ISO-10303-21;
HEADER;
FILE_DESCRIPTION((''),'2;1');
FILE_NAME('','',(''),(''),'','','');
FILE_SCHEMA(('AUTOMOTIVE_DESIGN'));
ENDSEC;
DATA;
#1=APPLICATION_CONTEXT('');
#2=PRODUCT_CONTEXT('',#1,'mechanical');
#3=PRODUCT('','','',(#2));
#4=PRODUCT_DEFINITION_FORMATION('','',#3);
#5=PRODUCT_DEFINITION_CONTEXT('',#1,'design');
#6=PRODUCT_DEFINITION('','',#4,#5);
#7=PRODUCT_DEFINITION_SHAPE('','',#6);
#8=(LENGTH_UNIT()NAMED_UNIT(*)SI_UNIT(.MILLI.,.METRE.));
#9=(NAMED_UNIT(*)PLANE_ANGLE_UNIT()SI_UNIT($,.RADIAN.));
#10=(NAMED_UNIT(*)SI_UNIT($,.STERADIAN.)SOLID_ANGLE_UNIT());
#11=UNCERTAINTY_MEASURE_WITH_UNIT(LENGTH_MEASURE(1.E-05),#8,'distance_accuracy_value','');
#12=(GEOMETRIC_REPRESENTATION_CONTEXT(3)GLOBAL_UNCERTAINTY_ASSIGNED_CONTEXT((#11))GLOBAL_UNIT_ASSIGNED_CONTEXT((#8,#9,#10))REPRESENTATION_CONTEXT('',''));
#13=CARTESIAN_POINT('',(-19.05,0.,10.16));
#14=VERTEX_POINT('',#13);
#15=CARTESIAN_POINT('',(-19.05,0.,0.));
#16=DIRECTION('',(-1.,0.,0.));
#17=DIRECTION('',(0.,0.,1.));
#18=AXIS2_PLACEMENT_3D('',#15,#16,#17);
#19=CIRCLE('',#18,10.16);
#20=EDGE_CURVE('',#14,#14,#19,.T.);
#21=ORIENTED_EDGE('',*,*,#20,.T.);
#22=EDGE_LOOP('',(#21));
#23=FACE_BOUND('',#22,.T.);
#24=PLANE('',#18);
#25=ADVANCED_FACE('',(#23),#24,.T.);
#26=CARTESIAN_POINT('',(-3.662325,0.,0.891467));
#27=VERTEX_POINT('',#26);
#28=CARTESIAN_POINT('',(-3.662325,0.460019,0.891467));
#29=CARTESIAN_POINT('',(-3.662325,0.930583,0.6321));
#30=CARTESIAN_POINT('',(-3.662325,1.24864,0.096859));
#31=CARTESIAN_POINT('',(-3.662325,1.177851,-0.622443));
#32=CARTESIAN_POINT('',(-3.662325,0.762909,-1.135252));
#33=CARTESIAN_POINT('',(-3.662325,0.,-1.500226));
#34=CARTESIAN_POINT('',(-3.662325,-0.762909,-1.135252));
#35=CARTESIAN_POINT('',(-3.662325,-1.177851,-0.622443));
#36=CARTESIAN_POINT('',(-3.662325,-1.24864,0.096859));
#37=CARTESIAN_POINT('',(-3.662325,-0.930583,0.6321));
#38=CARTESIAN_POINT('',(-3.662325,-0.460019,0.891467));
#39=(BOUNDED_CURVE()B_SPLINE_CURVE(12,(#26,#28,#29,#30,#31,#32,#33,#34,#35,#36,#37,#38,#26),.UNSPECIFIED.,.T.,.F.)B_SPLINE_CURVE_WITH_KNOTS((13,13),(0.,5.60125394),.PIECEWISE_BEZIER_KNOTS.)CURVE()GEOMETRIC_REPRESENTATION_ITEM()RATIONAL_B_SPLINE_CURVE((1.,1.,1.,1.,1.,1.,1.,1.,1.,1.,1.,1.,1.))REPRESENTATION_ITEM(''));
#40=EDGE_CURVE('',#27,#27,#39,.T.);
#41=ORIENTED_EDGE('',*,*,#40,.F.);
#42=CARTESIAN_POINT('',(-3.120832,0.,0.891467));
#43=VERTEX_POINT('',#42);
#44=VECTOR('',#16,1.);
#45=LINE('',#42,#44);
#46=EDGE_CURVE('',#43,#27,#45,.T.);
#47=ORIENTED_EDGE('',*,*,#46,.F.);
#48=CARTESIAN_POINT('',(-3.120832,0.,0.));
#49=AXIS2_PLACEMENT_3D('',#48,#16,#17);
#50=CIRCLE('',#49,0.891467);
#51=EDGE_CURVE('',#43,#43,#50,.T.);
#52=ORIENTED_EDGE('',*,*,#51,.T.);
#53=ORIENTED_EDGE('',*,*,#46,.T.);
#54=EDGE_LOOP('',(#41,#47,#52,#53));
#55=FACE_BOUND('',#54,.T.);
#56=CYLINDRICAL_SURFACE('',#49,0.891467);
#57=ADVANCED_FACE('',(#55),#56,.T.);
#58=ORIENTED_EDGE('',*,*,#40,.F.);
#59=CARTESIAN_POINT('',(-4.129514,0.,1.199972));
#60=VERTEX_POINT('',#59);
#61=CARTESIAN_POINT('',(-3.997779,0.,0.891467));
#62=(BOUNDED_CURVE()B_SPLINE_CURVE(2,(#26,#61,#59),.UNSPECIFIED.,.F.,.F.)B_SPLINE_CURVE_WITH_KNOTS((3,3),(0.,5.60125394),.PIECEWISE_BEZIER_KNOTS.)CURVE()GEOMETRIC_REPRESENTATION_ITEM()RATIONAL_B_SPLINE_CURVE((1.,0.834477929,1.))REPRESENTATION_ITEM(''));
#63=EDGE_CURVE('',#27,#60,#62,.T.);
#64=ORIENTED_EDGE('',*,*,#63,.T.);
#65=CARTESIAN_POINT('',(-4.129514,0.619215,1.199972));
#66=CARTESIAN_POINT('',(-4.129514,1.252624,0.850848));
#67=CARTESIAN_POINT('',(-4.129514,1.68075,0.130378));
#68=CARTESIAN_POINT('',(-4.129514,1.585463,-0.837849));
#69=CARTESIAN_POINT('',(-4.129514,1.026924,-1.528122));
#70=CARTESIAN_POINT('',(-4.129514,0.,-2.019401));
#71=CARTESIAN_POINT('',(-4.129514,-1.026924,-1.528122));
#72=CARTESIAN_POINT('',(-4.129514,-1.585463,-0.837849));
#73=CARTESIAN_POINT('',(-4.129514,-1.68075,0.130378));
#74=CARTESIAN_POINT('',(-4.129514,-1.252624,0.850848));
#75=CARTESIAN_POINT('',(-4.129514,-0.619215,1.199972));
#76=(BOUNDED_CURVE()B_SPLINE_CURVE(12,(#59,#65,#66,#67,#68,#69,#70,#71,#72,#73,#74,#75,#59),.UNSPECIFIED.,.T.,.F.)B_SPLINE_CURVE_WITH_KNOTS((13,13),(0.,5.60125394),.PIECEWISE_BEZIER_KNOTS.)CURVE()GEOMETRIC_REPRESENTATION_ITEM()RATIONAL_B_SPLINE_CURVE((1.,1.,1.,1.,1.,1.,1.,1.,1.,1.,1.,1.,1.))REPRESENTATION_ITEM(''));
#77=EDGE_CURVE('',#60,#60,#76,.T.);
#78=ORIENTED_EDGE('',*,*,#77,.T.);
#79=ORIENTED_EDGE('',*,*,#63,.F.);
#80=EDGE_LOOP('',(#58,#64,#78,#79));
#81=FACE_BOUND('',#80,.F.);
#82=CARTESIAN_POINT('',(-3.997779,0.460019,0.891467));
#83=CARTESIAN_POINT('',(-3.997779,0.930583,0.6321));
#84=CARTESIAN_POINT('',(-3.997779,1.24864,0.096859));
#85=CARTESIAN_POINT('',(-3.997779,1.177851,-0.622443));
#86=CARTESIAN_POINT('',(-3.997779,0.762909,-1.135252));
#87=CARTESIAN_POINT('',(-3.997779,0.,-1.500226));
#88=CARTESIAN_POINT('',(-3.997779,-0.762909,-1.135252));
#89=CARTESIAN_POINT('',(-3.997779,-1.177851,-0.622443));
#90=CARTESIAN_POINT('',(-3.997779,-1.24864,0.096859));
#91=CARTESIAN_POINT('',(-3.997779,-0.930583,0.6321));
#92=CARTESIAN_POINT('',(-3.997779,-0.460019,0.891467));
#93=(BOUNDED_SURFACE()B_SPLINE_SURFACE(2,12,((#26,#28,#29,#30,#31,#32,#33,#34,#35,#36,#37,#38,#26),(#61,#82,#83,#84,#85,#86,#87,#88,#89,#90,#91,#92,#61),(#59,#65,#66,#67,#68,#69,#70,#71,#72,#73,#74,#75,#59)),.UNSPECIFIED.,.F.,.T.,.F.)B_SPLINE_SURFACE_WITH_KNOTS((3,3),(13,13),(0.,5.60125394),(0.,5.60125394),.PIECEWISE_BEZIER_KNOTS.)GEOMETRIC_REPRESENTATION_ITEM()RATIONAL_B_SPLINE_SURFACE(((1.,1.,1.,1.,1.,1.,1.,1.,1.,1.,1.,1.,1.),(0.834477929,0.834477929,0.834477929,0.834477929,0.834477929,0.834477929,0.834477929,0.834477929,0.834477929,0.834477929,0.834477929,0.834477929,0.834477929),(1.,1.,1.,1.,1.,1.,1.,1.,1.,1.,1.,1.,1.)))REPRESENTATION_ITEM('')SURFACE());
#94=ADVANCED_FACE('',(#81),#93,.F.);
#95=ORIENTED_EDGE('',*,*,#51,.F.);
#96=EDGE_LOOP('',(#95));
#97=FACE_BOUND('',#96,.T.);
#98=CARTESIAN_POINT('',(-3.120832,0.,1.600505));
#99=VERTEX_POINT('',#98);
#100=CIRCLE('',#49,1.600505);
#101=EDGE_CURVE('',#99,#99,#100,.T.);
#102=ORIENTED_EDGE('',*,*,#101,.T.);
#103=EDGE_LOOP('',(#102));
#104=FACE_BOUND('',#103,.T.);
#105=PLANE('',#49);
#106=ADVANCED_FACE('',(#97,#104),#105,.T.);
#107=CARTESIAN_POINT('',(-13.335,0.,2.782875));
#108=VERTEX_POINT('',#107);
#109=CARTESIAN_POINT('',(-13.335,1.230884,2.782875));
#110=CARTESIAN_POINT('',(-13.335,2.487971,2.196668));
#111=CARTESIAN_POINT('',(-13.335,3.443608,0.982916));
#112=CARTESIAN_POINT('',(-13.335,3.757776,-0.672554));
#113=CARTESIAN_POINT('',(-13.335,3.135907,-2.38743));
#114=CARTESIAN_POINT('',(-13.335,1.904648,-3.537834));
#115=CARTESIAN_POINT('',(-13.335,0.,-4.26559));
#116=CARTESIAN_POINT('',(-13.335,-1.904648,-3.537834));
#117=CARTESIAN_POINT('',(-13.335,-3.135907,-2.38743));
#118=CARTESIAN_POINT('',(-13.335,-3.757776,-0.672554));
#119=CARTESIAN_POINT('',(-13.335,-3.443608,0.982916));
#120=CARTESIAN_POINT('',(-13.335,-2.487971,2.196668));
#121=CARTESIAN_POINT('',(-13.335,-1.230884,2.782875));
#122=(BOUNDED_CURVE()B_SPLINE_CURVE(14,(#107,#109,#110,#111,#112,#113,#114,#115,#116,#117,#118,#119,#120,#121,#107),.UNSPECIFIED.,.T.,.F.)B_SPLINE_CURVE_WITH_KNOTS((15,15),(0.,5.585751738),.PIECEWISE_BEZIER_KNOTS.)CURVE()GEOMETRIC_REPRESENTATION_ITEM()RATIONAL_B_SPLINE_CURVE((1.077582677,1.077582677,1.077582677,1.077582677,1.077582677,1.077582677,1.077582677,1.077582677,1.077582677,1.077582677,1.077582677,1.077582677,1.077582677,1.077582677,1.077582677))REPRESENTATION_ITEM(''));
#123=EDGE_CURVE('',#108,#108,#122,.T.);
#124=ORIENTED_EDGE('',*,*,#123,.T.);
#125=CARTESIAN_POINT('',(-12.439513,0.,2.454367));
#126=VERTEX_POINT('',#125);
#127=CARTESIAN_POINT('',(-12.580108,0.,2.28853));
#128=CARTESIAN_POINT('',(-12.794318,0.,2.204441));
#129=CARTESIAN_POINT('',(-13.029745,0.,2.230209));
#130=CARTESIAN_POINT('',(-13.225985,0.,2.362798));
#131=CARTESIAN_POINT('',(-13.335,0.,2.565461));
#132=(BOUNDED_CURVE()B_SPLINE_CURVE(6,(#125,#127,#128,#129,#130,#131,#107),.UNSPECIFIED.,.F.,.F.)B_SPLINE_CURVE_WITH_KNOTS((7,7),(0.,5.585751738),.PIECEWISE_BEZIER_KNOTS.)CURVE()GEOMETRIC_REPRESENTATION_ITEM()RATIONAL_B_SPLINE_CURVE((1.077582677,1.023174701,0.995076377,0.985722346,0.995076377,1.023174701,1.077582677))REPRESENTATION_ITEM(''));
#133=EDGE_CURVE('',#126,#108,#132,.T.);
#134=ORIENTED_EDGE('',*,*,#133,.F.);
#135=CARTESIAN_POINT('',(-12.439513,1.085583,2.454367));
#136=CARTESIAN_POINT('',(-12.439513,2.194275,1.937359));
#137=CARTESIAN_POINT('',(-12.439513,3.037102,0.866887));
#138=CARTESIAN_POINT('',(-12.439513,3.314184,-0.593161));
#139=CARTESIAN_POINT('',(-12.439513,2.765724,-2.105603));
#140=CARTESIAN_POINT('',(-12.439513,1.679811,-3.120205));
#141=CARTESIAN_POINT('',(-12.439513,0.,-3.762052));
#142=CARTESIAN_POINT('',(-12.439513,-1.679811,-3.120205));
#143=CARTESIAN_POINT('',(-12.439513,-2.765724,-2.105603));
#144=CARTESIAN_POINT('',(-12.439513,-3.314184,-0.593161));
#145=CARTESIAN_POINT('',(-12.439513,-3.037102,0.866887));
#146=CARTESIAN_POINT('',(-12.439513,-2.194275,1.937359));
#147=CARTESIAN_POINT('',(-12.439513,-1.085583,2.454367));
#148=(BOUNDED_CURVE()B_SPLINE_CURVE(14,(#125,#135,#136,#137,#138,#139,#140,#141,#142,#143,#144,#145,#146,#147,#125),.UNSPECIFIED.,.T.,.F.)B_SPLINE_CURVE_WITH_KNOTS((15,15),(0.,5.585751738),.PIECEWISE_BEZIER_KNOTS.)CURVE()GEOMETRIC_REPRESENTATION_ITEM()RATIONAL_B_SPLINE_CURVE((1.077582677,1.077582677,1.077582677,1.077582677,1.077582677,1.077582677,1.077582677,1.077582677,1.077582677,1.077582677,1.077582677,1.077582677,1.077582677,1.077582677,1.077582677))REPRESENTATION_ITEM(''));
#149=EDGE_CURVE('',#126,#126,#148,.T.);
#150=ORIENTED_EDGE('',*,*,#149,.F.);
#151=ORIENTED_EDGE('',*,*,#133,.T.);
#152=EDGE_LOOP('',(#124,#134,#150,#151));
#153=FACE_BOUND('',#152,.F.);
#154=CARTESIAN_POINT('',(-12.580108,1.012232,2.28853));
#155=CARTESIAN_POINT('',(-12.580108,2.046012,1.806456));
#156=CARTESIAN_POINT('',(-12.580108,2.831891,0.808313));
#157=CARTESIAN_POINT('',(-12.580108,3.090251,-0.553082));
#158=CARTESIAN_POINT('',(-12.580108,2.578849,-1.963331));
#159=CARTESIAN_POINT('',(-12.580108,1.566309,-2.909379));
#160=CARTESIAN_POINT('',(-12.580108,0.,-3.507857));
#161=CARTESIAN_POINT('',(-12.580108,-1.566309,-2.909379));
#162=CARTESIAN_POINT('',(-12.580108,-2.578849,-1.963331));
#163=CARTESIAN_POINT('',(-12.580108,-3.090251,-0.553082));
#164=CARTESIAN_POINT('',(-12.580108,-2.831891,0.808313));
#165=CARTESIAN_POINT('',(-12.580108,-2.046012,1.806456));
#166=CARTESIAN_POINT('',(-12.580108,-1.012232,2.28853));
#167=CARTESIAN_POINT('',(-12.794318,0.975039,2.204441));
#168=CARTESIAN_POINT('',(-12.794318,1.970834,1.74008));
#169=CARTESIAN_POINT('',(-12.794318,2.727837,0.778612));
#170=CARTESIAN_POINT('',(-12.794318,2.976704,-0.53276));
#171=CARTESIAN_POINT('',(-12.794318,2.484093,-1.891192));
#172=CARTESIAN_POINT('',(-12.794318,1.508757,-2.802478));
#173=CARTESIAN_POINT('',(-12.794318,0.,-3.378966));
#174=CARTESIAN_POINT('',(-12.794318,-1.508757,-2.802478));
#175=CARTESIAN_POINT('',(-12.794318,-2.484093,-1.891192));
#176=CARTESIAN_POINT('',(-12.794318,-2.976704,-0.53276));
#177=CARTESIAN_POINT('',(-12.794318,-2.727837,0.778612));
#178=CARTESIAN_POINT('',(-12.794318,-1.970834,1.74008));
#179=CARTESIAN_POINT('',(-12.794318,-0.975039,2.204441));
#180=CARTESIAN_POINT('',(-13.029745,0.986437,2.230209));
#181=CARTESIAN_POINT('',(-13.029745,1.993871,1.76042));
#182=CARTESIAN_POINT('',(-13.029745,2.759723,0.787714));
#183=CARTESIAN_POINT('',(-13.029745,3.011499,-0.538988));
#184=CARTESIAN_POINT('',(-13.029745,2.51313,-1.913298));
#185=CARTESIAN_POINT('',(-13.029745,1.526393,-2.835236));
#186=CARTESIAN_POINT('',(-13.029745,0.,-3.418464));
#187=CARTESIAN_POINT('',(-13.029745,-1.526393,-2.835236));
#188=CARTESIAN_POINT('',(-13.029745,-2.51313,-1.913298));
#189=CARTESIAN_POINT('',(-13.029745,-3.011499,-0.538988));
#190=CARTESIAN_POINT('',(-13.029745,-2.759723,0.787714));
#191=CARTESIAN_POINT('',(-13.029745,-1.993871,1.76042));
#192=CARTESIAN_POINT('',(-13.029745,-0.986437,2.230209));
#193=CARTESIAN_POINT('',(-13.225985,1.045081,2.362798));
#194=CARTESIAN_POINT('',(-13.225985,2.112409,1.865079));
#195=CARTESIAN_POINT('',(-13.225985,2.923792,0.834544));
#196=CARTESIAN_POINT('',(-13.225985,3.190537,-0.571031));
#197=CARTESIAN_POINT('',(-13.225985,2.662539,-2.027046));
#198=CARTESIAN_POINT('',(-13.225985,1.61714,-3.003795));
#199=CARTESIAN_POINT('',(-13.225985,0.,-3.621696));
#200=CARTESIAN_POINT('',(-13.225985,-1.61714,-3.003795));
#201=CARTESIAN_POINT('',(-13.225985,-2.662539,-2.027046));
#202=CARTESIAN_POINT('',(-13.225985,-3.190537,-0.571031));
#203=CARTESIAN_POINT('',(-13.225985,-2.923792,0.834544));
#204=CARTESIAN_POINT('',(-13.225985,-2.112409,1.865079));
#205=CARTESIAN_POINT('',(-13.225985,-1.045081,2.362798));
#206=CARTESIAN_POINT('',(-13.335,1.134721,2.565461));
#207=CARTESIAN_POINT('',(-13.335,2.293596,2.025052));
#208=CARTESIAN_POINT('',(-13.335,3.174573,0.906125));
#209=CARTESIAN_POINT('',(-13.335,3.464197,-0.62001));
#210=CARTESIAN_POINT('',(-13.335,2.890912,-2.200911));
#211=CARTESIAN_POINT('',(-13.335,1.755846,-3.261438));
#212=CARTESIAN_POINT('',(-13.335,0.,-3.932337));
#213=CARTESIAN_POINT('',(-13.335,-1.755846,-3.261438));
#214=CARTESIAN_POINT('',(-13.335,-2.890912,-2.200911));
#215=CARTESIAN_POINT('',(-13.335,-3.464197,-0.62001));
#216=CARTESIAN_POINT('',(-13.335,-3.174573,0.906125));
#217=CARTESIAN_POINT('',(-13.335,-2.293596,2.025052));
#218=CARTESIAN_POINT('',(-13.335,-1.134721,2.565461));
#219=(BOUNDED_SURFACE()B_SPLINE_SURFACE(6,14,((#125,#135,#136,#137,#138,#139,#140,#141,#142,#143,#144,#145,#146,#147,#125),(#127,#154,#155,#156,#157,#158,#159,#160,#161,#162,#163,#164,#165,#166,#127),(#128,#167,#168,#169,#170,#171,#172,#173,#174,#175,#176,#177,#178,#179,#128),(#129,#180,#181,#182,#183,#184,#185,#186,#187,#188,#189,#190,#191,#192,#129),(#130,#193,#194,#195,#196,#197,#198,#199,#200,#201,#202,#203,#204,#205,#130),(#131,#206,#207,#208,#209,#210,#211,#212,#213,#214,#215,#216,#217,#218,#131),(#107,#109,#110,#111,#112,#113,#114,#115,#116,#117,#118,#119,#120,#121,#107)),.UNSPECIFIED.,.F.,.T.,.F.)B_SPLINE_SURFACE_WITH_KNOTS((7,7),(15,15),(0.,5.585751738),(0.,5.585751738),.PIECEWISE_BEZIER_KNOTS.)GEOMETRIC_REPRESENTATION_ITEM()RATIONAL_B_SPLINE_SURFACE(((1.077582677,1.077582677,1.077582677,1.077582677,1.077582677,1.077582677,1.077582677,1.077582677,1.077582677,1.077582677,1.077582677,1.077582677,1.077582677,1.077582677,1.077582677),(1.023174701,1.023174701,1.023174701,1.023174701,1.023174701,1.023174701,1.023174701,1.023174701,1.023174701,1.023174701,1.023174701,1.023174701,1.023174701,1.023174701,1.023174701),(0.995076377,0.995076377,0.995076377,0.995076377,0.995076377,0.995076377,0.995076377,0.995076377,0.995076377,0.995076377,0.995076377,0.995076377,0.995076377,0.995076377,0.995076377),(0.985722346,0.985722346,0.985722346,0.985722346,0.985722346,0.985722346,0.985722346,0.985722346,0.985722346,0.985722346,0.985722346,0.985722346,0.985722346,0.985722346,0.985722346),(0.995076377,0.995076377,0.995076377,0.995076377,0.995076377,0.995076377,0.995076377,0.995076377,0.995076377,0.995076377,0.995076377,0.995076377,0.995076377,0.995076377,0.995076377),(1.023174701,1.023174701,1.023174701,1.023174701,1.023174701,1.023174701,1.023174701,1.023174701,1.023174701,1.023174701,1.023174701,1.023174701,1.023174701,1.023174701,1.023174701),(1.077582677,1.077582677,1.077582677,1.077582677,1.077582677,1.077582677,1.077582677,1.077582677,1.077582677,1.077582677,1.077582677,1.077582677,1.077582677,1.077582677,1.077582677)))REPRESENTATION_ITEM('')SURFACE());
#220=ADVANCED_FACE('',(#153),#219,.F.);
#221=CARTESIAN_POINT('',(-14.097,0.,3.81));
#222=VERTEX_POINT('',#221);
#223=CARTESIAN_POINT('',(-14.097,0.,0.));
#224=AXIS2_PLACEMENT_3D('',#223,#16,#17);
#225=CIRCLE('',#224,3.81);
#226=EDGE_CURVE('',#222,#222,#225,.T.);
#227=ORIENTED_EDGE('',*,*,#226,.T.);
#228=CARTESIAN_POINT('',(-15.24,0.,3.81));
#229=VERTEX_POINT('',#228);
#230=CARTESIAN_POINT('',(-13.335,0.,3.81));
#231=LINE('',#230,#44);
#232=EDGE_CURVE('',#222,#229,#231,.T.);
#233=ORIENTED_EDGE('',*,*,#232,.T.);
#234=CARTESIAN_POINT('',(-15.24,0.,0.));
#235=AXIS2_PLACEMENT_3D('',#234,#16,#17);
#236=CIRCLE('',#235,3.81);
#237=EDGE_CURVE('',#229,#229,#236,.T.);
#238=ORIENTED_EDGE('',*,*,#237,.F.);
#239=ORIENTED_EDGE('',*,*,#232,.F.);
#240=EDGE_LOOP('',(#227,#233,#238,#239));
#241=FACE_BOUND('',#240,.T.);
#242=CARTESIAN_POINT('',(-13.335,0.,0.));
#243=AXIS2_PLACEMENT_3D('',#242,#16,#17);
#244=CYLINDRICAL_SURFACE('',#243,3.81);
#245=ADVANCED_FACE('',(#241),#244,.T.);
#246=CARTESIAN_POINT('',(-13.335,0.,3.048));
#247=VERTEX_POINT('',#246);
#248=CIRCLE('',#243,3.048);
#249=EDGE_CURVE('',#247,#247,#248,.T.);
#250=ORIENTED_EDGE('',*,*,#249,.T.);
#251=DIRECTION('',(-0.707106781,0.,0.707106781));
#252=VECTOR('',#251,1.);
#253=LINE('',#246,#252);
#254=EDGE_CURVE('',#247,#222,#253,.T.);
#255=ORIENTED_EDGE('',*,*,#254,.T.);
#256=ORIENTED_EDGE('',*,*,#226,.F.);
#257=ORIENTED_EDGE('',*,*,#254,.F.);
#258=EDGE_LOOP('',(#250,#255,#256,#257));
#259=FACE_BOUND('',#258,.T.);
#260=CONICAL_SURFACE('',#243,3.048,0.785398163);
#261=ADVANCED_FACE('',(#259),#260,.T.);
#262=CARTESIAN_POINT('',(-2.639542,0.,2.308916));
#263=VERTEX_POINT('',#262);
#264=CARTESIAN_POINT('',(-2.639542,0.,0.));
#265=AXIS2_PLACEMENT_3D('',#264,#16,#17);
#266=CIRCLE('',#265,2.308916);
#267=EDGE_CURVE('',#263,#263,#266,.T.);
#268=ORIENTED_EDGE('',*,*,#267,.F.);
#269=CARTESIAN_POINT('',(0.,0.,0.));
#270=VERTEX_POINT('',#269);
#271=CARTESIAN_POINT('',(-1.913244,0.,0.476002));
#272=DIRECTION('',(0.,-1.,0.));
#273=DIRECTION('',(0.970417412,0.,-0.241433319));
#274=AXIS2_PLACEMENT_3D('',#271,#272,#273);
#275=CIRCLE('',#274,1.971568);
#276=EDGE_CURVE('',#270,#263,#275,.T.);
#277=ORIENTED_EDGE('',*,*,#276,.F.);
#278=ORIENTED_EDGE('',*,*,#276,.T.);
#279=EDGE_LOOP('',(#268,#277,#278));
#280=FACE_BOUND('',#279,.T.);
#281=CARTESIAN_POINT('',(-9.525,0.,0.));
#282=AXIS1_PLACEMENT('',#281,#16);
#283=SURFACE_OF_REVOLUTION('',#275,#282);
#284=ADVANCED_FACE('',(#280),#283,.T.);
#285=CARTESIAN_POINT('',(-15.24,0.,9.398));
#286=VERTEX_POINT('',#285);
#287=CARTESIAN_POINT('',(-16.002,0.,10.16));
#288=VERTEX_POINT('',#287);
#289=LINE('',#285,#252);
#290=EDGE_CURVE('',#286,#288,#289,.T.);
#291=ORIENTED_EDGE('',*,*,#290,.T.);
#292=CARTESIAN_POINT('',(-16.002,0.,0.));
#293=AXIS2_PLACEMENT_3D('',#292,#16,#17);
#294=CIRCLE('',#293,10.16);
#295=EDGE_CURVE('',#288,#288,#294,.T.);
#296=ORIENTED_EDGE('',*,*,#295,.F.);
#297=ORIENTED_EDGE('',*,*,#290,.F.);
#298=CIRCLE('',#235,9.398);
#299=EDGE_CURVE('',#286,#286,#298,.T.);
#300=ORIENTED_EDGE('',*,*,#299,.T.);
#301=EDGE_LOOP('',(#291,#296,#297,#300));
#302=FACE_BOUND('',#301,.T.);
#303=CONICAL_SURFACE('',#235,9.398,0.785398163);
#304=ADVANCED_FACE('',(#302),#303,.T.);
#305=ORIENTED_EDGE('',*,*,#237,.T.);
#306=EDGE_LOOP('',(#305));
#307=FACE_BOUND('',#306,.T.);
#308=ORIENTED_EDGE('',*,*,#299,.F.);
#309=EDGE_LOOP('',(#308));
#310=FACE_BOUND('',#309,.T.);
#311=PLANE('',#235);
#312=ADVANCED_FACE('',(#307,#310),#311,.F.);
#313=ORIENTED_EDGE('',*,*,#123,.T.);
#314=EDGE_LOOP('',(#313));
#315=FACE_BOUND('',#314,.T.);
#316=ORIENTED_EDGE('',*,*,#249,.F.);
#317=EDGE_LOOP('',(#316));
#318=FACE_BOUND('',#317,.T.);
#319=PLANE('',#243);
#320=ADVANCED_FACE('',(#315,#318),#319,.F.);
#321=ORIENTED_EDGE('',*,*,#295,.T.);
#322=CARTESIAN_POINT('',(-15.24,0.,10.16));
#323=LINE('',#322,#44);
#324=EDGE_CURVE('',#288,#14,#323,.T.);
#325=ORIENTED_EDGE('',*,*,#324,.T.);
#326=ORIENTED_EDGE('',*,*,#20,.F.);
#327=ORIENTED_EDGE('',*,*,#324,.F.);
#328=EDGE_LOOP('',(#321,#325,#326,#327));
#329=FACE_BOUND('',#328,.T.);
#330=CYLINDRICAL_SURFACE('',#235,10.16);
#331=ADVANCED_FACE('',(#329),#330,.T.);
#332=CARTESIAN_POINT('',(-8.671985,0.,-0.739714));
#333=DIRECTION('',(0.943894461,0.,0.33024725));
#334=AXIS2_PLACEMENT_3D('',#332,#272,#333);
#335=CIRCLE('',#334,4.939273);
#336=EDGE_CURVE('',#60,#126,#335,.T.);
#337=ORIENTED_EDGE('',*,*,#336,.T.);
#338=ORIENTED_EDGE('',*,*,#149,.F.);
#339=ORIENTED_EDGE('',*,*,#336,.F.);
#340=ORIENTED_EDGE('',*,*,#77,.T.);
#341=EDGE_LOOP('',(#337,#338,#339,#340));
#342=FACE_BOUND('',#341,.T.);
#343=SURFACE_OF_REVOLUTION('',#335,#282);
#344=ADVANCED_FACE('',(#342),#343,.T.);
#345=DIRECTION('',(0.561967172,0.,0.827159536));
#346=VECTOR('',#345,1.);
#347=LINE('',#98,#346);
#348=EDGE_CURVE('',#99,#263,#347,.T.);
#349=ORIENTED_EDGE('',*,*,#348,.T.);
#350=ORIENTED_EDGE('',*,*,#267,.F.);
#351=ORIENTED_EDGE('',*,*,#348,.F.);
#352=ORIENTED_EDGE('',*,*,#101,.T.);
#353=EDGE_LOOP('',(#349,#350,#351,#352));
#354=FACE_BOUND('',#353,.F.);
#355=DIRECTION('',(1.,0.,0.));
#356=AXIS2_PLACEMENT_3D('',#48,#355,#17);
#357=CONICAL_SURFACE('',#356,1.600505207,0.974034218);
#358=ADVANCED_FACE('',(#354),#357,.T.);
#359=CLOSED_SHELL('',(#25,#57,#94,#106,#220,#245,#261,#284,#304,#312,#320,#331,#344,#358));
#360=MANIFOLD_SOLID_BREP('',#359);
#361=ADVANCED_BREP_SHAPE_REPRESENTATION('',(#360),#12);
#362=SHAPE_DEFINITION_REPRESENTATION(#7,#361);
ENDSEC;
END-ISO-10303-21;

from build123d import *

# Parameters (mm, degrees)
F2_R = 0.508


# Not quite as in the source:
# - a fillet or chamfer that OpenCascade refuses, or shapes differently, is made with other operations: its cross-section is extruded or revolved along the edge and cut away or added


with BuildPart() as f1:
    # F0 (on Front) → F1 (revolve)
    with BuildSketch(Plane.XZ):
        with BuildLine():
            Line((-19.05, 0), (0, 0))
            ThreePointArc((0, 0), (-0.8365584984, 2.1276164223), (-3.1208319045, 2.034467252))
            Line((-3.1208319045, 2.034467252), (-3.1208319045, 0.891467252))
            Line((-3.1208319045, 0.891467252), (-4.0098319045, 0.891467252))
            ThreePointArc((-4.0098319045, 0.891467252), (-8.6732915332, 4.1995590152), (-13.335, 0.889))
            Line((-13.335, 0.889), (-13.335, 3.81))
            Line((-13.335, 3.81), (-15.24, 3.81))
            Line((-15.24, 3.81), (-15.24, 10.16))
            Line((-15.24, 10.16), (-19.05, 10.16))
            Line((-19.05, 10.16), (-19.05, 0))
        make_face()
    revolve(axis=Axis((-9.525, 0, 0), (-1, 0, 0)))

    # F2
    f2_edges = [f1.edges().sort_by_distance(p)[0] for p in [
        (-4.009832, 0, -0.891467),
        (-13.335, 0, -0.889),
        (-8.673292, 0, 4.199559),
    ]]
    fillet(f2_edges, radius=F2_R)

    # F3: chamfer of 0.762 on 3 edges, made by hand

    # F3_s1 → F3_t2 (revolve, cut)
    with BuildSketch(Plane.XZ):
        Polygon((-15.24, 9.398), (-16.002, 10.16), (-15.24, 10.16), align=None)
    revolve(axis=Axis((-15.24, 0, 0), (-1, 0, 0)), mode=Mode.SUBTRACT)

    # F3_s3 → F3_t4 (revolve, cut)
    with BuildSketch(Plane.XZ):
        Polygon((-13.335, 3.048), (-14.097, 3.81), (-13.335, 3.81), align=None)
    revolve(axis=Axis((-13.335, 0, 0), (-1, 0, 0)), mode=Mode.SUBTRACT)

    # F3_s5 → F3_t6 (revolve, cut)
    with BuildSketch(Plane.XZ):
        with BuildLine():
            Line((-3.1208319045, 1.600505207), (-2.6395418811, 2.3089160405))
            ThreePointArc((-2.6395418811, 2.3089160405), (-2.8778866419, 2.1954632748), (-3.1208319045, 2.034467252))
            Line((-3.1208319045, 2.034467252), (-3.1208319045, 1.600505207))
        make_face()
    revolve(axis=Axis((-3.1208319045, 0, 0), (-1, 0, 0)), mode=Mode.SUBTRACT)


solid = f1.part
